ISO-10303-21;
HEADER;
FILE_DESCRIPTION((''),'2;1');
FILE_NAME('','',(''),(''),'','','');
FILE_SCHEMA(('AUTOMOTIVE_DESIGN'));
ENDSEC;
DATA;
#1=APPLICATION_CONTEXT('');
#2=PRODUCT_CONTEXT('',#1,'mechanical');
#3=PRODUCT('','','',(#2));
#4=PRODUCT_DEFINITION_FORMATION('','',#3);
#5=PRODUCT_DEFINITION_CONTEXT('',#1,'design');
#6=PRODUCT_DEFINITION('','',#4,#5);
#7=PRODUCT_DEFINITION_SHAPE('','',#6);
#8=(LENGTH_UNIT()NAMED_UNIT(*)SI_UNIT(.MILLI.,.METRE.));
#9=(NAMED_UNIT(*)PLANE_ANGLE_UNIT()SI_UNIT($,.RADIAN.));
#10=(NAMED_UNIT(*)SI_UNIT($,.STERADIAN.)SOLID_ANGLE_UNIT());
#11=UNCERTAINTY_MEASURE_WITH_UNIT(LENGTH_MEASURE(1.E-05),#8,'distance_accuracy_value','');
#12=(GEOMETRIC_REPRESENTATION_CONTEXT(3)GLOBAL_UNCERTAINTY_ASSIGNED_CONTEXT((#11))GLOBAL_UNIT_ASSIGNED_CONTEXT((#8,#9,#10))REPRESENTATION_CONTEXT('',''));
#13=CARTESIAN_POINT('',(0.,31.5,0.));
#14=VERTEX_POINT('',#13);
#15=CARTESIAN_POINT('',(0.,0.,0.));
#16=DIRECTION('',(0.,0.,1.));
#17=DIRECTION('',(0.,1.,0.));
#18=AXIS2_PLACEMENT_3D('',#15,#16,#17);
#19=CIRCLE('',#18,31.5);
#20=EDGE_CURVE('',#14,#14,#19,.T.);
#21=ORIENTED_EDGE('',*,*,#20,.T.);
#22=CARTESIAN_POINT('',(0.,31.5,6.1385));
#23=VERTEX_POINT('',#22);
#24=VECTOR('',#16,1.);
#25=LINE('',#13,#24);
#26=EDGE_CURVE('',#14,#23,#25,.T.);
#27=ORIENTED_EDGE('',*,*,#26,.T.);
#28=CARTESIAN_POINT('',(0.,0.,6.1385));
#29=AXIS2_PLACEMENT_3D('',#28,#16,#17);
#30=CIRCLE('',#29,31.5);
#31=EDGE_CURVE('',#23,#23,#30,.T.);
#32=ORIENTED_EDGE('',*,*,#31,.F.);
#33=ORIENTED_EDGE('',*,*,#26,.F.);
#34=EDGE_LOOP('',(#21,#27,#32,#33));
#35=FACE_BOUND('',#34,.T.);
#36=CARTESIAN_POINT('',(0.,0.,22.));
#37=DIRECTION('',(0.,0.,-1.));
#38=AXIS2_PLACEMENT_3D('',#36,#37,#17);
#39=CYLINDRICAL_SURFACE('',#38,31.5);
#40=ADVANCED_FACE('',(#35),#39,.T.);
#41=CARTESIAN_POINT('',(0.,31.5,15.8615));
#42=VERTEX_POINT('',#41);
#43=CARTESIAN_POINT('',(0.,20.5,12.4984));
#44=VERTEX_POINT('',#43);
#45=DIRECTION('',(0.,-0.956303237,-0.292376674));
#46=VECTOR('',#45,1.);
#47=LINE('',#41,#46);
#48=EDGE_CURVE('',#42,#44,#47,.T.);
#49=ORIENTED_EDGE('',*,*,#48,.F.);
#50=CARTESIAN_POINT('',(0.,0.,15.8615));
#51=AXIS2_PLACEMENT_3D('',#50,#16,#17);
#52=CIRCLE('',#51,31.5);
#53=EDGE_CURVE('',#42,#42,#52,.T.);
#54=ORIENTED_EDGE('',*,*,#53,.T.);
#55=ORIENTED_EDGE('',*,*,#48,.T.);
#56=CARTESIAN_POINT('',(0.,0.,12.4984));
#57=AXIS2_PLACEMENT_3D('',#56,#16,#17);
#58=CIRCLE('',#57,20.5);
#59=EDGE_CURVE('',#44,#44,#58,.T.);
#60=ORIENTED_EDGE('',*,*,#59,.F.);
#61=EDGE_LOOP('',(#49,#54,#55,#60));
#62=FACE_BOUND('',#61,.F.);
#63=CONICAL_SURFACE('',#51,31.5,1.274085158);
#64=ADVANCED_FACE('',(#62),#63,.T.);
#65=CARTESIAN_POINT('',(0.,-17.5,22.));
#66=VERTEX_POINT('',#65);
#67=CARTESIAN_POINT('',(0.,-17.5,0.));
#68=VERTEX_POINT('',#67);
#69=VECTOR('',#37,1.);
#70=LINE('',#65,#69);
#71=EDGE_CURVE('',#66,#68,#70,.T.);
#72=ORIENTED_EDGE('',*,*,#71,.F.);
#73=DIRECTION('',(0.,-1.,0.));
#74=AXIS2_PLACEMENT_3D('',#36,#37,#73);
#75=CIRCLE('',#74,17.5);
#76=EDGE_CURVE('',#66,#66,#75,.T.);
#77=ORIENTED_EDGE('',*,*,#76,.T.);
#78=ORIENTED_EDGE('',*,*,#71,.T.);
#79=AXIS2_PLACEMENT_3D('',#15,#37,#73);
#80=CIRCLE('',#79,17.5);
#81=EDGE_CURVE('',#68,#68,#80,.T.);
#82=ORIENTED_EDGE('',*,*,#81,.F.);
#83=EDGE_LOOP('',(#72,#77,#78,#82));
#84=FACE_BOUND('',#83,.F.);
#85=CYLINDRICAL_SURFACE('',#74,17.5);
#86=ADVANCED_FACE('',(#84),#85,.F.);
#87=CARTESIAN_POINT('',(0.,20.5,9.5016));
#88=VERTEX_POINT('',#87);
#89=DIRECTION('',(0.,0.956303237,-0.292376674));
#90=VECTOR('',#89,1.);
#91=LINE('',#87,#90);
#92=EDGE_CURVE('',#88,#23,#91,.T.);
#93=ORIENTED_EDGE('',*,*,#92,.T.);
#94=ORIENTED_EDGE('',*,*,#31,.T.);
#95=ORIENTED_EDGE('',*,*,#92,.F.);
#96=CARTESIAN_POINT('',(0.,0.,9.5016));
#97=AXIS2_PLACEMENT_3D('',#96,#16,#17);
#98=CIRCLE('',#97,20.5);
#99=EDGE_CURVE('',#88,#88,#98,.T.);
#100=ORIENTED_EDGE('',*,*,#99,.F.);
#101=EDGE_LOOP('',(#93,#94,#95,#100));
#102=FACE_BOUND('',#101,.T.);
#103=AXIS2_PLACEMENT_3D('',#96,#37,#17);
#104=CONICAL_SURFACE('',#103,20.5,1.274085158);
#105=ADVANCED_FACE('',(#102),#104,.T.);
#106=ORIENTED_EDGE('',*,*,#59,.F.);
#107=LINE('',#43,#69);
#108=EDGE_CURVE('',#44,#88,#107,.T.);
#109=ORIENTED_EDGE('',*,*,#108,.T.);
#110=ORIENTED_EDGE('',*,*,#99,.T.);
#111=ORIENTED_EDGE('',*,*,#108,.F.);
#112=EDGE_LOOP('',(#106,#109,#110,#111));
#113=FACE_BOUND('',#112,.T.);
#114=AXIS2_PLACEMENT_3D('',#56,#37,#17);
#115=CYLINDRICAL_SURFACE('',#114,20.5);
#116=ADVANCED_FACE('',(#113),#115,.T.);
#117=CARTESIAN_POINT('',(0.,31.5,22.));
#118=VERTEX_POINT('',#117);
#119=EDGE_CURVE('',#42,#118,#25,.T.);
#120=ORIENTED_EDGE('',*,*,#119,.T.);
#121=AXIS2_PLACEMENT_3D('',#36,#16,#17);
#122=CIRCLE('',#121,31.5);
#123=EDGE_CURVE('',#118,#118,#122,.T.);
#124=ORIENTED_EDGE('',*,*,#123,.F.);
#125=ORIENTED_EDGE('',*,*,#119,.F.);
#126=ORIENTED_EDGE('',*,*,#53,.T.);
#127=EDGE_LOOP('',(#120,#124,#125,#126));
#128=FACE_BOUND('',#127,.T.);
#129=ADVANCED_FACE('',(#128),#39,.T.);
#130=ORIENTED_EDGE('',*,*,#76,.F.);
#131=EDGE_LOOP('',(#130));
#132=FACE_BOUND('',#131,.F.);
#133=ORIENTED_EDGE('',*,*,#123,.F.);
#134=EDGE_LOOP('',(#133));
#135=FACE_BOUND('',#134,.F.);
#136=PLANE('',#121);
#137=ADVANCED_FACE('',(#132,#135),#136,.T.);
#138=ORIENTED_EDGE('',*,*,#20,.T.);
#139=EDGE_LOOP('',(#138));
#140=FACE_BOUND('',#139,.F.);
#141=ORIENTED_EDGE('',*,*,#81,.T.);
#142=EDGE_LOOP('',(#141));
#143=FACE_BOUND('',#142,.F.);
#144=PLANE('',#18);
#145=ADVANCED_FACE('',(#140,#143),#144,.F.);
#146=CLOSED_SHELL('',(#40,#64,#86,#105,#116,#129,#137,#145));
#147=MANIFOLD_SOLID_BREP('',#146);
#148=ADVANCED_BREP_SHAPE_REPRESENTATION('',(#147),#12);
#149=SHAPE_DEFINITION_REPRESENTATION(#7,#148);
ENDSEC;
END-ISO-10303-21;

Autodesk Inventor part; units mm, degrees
ref_plane "YZ Plane" through (0, 0, 0) normal (1, 0, 0) x (0, 1, 0)
ref_plane "XZ Plane" through (0, 0, 0) normal (0, 1, 0) x (-1, 0, 0)
sketch "Esquisse principale" plane through (0, 0, 0) normal (1, 0, 0) x (0, 1, 0)
  line L0 (0, 22) -> (31.5, 22)
  line L1 (31.5, 22) -> (31.5, 15.8615)
  line L2 (31.5, 15.8615) -> (20.5, 12.4984)
  line L3 (20.5, 12.4984) -> (20.5, 9.5016)
  line L4 (20.5, 9.5016) -> (31.5, 6.1385)
  line L5 (31.5, 6.1385) -> (31.5, 0)
  line L6 (31.5, 0) -> (0, 0)
  line L7 (29.5, 15.25) -> (29.5, 6.75) construction
  line L8 (20.5, 11) -> (29.5, 11) construction
  line L9 (31.5, 15.8615) -> (31.5, 6.1385)
  line L10 (0, -3.2) -> (0, 19.2) projected
  line L11 (0, 0) -> (0, 22)
  dimension "d0" = 8.5
  dimension "d1" = 34
  dimension "d2" = 2
  dimension "d6" = 22
  dimension "d21" = 59
  dimension "d25" = 11
  dimension "d27" = 11
ref_plane "Plan de courroie" through (0, 20.5, 11) normal (0, 0, 1) x (1, 0, 0)
revolve "Corps" add sketch "Esquisse principale" angle 360 about axis through (0, 0, -10) along (0, 0, 1)
revolve "Bord" cut sketch "Esquisse principale" angle 360 about axis through (0, 0, -10) along (0, 0, 1) contours L9 L4 L3 L2
fillet "Congé externe" [suppressed]
fillet "Congé interne" [suppressed]
pattern_of_one "Réseau de bords"
sketch "Esquisse2" plane through (0, 0, 22) normal (0, 0, 1) x (1, 0, 0)
  circle A0 centre (0, 0) radius 31.5 projected
hole "Perçage1" at (0, 0, 22) direction (0, 0, -1) diameter 35 depth 22
equation "\"d0\" = da_Bw"
equation "\"d1\" = da_Alfa"
equation "\"d2\" = da_c"
equation "\"d21\" = da_Dw"
equation "\"d25\" = da_Hd"
equation "\"d27\" = da_Se"
equation "\"da_r1\" = 0"
equation "\"da_r2\" = 0"
equation "\"d18\" = da_Sg"
equation "\"d5\" = da_Se"
equation "\"da_Bw\" = 8.5"
equation "\"da_Alfa\" = 34deg"
equation "\"da_c\" = 2"
equation "\"da_Dw\" = 59"
equation "\"da_Hd\" = 11"
equation "\"da_Se\" = 11"
equation "\"da_Sg\" = 12"
properties part number "Poulie à gorge2" material "Steel"
